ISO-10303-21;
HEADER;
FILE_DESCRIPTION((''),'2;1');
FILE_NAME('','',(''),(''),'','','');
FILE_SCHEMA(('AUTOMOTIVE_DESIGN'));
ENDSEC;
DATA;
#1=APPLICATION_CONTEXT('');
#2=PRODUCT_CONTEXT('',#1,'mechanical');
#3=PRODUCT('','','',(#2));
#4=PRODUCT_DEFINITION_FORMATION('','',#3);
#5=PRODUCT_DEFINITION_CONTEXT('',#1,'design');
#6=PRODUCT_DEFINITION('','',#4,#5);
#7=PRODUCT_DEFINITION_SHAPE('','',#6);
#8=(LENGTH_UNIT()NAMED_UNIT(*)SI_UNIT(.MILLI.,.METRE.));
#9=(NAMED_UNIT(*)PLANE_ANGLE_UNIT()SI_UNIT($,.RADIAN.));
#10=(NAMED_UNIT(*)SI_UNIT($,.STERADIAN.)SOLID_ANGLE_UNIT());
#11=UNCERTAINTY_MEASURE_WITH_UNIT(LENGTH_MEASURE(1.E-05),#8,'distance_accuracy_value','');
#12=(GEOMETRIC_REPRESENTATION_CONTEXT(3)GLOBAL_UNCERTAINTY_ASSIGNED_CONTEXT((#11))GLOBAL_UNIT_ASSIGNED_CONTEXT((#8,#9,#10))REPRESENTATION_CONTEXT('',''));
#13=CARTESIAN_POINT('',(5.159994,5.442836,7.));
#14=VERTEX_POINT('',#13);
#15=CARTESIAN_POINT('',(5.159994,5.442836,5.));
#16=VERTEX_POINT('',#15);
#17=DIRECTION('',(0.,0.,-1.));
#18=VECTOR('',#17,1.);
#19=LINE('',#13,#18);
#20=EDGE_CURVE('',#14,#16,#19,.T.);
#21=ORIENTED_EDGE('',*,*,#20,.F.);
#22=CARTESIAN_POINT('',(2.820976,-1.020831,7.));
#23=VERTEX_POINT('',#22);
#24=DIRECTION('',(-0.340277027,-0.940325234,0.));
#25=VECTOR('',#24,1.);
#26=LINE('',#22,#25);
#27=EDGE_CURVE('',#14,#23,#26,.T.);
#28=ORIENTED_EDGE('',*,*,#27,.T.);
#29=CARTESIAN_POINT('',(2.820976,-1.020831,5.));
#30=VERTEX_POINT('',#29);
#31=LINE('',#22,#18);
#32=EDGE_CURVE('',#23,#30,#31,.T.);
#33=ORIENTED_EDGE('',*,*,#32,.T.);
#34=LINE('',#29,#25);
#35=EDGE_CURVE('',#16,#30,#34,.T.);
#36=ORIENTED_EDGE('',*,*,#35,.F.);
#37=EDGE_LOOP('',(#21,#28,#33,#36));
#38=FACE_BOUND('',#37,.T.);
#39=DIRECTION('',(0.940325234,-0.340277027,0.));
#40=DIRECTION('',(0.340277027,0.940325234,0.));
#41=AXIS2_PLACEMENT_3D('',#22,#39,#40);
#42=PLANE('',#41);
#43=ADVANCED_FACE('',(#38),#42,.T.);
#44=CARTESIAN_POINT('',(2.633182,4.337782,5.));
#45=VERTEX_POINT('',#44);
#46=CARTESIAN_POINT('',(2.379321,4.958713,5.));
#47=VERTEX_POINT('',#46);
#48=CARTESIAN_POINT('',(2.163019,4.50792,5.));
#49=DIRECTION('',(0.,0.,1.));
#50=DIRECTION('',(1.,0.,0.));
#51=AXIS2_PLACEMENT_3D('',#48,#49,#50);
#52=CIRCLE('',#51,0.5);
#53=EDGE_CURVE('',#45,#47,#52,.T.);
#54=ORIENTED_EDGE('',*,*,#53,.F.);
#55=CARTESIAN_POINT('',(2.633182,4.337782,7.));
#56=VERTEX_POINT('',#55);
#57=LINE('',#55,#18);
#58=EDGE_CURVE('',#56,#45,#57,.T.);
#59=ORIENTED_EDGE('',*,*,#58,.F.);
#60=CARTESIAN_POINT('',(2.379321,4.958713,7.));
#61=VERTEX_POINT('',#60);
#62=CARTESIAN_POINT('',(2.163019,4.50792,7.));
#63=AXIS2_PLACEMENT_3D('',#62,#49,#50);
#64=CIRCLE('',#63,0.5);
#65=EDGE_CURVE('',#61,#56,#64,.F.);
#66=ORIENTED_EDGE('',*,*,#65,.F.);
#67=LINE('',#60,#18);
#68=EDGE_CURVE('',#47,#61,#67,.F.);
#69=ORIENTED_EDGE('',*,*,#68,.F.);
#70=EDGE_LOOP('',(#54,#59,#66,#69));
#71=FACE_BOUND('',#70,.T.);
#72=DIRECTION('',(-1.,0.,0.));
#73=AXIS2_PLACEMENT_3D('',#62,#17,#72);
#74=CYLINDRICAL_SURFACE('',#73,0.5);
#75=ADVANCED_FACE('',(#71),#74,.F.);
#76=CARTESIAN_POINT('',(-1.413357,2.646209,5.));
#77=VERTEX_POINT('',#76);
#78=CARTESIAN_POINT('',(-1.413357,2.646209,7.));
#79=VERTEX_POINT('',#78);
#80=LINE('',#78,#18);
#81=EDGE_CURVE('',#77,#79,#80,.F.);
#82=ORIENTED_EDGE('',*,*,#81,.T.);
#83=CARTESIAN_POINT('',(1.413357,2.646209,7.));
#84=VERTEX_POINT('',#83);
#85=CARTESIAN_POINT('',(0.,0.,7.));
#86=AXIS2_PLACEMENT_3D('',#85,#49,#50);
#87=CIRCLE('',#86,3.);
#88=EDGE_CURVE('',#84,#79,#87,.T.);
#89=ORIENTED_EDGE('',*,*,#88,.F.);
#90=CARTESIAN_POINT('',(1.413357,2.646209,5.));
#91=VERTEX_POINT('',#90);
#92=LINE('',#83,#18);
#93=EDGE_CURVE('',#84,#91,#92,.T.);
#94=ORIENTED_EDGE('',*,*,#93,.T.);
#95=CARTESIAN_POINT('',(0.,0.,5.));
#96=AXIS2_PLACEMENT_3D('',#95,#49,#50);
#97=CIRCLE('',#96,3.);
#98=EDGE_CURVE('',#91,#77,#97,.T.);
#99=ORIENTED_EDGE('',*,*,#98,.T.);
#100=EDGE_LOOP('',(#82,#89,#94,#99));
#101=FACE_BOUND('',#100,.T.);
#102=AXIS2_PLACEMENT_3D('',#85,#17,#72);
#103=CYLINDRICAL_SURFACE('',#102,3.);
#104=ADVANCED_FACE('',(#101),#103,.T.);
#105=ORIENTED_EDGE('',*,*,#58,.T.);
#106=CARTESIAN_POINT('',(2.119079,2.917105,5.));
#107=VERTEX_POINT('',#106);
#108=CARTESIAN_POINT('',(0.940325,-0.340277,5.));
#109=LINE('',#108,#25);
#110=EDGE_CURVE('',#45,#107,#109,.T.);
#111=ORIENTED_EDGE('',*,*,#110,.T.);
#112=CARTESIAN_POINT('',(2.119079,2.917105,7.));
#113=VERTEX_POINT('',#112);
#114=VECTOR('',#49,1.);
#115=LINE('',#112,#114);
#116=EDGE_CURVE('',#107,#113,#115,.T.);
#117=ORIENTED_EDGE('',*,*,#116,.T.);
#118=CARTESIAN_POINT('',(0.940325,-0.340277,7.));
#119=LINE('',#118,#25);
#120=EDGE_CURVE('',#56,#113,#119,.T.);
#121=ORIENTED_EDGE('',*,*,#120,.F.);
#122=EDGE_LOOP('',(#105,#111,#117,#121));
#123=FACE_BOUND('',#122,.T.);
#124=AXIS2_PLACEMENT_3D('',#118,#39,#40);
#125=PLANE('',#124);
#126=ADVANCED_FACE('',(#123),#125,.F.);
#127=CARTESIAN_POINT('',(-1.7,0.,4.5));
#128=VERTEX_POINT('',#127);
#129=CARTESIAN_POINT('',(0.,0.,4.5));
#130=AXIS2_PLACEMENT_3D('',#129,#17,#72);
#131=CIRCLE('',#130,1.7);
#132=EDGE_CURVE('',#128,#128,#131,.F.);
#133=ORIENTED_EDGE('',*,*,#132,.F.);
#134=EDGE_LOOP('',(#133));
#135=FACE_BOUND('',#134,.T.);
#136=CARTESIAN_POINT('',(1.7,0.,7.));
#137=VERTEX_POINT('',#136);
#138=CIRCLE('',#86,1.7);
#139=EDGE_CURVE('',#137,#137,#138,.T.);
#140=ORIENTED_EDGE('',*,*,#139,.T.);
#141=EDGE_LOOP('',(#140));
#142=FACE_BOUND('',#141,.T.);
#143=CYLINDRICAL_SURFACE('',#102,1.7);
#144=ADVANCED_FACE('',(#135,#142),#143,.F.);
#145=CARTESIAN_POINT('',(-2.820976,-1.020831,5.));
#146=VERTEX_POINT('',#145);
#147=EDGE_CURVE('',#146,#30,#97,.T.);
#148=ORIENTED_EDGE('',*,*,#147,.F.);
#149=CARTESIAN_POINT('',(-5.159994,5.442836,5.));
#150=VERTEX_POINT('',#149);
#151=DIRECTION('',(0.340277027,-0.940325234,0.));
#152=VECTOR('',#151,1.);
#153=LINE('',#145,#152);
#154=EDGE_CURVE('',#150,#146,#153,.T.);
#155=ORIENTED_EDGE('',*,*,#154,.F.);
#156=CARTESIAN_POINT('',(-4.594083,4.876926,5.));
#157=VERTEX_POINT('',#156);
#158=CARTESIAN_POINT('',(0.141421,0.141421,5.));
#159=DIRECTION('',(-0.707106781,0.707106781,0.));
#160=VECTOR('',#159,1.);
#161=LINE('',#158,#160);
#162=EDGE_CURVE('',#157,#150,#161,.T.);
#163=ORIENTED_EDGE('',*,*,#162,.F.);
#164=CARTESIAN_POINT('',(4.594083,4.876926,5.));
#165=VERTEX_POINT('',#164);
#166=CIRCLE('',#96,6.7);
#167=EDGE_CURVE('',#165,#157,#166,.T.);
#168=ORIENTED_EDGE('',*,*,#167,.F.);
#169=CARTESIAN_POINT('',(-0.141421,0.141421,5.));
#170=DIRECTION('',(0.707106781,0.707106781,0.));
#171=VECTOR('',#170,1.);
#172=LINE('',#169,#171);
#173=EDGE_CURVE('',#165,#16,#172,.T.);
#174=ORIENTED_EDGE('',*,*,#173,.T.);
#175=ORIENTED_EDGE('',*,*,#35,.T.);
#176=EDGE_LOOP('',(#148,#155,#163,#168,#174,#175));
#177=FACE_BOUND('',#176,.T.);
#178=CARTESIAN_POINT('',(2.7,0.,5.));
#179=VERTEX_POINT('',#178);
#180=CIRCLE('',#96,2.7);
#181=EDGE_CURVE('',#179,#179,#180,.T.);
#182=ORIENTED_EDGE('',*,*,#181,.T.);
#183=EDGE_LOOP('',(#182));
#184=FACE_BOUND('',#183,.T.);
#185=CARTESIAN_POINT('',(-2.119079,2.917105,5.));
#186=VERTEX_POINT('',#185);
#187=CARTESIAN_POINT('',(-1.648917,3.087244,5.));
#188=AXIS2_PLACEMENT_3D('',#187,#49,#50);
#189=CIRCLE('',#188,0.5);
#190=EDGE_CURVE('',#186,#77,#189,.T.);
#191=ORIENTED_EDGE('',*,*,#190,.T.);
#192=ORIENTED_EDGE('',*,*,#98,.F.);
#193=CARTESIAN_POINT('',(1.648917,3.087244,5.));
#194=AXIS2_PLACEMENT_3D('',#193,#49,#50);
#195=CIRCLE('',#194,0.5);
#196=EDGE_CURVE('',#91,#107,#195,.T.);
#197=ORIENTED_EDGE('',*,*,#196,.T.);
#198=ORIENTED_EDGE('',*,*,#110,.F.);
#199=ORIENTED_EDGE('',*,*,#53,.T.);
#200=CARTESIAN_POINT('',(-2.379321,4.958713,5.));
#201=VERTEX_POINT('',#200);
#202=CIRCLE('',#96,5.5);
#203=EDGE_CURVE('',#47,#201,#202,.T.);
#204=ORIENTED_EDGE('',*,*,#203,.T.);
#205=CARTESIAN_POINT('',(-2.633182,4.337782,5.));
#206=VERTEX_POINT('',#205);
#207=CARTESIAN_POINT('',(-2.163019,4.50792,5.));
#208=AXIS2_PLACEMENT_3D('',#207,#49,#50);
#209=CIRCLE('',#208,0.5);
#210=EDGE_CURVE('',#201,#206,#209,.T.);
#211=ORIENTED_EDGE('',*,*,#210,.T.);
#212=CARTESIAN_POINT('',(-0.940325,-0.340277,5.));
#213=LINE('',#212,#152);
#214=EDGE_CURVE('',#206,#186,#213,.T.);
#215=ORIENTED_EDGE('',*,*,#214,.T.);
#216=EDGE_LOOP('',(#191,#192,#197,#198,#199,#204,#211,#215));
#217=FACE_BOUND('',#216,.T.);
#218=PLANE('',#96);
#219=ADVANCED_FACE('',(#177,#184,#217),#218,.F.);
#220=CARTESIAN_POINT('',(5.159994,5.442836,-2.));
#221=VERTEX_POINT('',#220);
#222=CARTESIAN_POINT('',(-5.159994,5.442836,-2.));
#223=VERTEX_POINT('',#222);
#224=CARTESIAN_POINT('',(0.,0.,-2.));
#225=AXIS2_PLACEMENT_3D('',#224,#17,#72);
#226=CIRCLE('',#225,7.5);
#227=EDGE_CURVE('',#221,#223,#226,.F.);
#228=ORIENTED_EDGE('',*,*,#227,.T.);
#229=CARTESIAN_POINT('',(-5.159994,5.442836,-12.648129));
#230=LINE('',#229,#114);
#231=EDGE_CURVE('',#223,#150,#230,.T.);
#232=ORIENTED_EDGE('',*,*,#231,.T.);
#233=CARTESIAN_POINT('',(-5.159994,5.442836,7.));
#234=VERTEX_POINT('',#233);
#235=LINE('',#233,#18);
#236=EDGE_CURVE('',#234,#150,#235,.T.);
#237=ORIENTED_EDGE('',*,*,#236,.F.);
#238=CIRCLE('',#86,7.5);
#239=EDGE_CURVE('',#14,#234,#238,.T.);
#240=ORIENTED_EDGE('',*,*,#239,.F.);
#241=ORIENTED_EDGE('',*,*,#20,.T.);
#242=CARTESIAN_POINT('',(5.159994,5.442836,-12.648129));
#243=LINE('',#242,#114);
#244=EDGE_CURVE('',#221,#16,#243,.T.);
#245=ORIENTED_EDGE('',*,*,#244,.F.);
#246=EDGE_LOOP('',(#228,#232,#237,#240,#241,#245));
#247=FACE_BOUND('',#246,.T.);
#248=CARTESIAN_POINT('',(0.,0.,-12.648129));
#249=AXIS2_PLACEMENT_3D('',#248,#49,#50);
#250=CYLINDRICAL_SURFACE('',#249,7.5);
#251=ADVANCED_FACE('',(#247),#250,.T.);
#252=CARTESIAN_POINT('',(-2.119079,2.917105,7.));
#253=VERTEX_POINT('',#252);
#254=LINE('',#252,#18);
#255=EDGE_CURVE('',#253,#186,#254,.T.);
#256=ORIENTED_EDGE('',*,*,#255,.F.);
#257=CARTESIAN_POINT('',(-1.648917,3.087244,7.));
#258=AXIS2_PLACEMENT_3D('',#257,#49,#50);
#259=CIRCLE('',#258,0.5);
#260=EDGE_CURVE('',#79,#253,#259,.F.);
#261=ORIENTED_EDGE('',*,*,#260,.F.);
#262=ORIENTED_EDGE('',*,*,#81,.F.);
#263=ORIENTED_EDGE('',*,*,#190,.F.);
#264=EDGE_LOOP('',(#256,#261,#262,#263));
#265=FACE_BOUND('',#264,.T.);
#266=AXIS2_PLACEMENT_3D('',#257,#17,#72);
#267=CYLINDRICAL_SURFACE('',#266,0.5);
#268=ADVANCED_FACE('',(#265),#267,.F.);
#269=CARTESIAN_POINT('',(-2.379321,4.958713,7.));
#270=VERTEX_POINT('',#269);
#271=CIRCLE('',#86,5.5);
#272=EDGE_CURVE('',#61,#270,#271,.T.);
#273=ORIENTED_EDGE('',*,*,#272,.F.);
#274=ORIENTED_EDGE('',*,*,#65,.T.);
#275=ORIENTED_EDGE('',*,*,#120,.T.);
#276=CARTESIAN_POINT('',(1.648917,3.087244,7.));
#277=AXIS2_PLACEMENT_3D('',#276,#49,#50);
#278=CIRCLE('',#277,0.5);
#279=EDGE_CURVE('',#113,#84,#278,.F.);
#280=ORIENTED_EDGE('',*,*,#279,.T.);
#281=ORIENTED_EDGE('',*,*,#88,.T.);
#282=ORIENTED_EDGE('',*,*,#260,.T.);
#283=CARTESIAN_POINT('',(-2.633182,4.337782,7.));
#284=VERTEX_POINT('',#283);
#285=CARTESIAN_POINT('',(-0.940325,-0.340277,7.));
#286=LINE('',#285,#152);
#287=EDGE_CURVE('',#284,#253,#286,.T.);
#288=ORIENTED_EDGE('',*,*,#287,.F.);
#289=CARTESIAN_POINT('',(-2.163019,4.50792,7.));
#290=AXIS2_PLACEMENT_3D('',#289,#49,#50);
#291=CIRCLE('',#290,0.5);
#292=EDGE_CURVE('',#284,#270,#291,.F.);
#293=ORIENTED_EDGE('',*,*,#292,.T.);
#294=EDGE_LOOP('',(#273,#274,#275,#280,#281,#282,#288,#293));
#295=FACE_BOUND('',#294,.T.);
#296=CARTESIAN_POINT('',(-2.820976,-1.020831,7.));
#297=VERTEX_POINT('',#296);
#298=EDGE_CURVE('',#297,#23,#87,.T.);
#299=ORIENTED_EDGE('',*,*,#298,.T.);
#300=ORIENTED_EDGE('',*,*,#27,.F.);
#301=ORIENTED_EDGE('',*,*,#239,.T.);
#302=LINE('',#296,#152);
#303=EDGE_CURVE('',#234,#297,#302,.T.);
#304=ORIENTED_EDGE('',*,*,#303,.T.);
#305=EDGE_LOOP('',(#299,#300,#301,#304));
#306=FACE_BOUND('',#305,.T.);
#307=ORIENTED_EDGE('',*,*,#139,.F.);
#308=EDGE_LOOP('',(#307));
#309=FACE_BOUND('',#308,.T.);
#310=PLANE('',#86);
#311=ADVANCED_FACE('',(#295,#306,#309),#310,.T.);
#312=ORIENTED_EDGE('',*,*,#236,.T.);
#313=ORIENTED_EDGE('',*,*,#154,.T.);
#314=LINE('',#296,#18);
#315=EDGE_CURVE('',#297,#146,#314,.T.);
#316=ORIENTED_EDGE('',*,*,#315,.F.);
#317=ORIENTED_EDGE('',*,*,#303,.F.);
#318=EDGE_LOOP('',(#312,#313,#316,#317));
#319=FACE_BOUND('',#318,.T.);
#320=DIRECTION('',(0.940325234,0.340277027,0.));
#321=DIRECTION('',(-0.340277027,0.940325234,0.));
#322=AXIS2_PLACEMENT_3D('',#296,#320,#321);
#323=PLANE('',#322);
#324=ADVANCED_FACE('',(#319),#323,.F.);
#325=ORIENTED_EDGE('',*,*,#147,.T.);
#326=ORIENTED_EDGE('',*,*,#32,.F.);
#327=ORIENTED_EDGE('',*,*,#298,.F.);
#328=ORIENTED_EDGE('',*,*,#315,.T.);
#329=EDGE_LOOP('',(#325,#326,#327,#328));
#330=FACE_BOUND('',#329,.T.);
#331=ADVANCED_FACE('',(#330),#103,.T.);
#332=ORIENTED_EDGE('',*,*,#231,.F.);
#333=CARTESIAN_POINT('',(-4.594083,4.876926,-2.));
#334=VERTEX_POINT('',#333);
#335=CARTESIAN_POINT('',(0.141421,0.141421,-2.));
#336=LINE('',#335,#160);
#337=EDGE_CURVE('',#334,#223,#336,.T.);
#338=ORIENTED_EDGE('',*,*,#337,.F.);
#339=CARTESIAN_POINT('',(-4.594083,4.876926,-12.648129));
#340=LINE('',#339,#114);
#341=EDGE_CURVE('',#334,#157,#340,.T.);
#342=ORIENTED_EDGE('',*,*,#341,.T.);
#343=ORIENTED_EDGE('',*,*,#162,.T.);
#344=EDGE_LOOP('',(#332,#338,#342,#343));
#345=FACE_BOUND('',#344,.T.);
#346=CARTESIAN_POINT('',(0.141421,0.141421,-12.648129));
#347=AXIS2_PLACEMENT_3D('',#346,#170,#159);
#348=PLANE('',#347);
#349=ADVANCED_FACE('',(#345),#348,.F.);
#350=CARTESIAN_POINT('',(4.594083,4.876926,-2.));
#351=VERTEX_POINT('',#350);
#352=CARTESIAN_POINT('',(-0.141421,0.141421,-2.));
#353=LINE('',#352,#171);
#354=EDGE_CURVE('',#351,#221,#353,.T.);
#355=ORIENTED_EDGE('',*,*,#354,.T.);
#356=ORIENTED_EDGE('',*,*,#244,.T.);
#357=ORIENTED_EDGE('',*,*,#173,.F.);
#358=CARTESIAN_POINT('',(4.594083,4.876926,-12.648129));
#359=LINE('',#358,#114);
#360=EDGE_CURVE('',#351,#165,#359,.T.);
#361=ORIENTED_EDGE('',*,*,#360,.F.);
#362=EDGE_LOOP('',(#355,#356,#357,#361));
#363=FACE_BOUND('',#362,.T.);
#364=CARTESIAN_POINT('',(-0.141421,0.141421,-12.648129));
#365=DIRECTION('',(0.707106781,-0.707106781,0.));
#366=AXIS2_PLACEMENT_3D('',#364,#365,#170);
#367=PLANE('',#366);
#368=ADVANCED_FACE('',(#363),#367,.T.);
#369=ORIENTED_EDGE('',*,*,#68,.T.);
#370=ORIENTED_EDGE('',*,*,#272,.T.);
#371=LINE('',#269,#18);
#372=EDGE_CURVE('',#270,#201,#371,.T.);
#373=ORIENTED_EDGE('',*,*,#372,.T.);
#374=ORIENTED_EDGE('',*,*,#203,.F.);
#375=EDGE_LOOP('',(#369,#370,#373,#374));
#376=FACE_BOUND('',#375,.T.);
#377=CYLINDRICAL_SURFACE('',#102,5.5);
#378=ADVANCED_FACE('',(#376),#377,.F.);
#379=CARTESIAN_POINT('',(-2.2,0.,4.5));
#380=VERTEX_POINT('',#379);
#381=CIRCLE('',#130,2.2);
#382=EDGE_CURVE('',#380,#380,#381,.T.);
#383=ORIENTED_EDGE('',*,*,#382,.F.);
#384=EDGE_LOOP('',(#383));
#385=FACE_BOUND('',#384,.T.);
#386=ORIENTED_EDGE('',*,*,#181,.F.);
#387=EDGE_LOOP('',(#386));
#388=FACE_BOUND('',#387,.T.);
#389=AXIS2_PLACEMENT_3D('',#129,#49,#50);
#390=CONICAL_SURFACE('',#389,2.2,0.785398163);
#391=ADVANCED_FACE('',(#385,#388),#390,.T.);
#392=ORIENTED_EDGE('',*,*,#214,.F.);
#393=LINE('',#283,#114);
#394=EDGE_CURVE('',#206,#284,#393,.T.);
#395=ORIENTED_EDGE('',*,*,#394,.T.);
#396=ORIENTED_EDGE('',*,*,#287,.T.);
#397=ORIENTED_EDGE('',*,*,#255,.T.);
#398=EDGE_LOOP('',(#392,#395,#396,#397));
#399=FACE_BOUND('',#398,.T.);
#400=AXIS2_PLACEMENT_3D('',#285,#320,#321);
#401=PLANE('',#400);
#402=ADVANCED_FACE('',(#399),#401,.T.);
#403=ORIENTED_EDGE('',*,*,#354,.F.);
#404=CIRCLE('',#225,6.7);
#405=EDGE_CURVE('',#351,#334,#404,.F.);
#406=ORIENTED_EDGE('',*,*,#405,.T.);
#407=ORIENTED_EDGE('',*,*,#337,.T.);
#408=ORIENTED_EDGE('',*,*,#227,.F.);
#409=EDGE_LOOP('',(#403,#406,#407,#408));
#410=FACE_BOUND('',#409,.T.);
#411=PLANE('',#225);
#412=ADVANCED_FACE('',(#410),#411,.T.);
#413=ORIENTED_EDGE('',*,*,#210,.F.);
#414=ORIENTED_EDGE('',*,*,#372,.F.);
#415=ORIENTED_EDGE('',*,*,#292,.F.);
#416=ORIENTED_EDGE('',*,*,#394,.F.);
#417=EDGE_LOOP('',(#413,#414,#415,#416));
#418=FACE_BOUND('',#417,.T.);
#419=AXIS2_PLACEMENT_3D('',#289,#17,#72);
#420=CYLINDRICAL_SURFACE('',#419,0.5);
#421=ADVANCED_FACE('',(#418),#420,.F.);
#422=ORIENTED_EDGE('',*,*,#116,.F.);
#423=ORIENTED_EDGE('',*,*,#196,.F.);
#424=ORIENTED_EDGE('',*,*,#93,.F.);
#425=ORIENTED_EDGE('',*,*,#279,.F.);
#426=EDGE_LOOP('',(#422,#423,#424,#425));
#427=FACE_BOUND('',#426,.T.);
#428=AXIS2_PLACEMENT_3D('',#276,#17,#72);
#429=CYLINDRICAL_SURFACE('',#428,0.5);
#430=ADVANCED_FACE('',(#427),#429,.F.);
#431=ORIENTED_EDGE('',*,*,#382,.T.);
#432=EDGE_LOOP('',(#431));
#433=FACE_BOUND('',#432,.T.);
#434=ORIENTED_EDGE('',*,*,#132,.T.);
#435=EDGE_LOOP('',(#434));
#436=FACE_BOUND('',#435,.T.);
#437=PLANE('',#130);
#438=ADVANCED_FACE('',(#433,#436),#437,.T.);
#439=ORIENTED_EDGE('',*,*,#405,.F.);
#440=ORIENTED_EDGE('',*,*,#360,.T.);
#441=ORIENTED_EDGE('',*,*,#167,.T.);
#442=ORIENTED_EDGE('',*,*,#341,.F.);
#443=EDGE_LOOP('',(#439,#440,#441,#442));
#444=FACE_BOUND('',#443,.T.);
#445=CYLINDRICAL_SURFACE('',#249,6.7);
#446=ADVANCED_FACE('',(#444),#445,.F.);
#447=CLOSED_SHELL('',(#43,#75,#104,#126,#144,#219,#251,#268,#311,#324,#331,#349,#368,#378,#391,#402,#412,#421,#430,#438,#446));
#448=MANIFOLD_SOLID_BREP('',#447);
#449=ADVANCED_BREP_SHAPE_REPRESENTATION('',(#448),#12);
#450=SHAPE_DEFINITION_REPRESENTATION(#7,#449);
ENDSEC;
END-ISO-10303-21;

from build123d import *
from build123d.topology import SkipClean

# Parameters (mm, degrees)
BOSS_EXTRUDE1_DEPTH = 2
BOSS_EXTRUDE2_START = 5
BOSS_EXTRUDE2_DEPTH = 5
BOSS_EXTRUDE3_START = 2
SKETCH3_R           = 3
SKETCH3_R_2         = 1.7
BOSS_EXTRUDE3_DEPTH = 2
SKETCH4_R           = 2.2
SKETCH4_R_2         = 1.7
BOSS_EXTRUDE4_DEPTH = 0.5
CHAMFER1_SIZE       = 0.5
FILLET1_R           = 0.5


with BuildPart() as part:
    # Sketch1 → Boss-Extrude1 (new body)
    with BuildSketch(Plane.XY):
        with BuildLine():
            Line((4.594082841, 4.876925553), (5.159993549, 5.442836262))
            ThreePointArc((5.159993549, 5.442836262), (0, 7.5), (-5.159993549, 5.442836262))
            Line((-5.159993549, 5.442836262), (-4.594082841, 4.876925553))
            ThreePointArc((-4.594082841, 4.876925553), (0, 6.7), (4.594082841, 4.876925553))
        make_face()
    extrude(amount=-BOSS_EXTRUDE1_DEPTH)

    # Sketch1<3> → Boss-Extrude2 (add)
    with BuildSketch(Plane.XY.offset(BOSS_EXTRUDE2_START)):
        with BuildLine():
            Line((4.594082841, 4.876925553), (5.159993549, 5.442836262))
            ThreePointArc((5.159993549, 5.442836262), (0, 7.5), (-5.159993549, 5.442836262))
            Line((-5.159993549, 5.442836262), (-4.594082841, 4.876925553))
            ThreePointArc((-4.594082841, 4.876925553), (0, 6.7), (4.594082841, 4.876925553))
        make_face()
    extrude(amount=-BOSS_EXTRUDE2_DEPTH)

    # Sketch3 → Boss-Extrude3 (add)
    # profile 1 of 3: a face of its own
    with BuildSketch(Plane.XY.offset(5).offset(BOSS_EXTRUDE3_START)):
        with BuildLine():
            Line((-4.594082841, 4.876925553), (-5.159993549, 5.442836262))
            Line((-5.159993549, 5.442836262), (-2.820975701, -1.02083108))
            ThreePointArc((-2.820975701, -1.02083108), (-2.892694114, 0.795185994), (-1.902774006, 2.31936437))
            Line((-1.902774006, 2.31936437), (-2.780654635, 4.745309242))
            ThreePointArc((-2.780654635, 4.745309242), (0, 5.5), (2.780654635, 4.745309242))
            Line((2.780654635, 4.745309242), (1.902774006, 2.31936437))
            ThreePointArc((1.902774006, 2.31936437), (2.711855639, 1.282902565), (3, 0))
            ThreePointArc((3, 0), (2.954904999, -0.518205025), (2.820975701, -1.02083108))
            Line((2.820975701, -1.02083108), (5.159993549, 5.442836262))
            Line((5.159993549, 5.442836262), (4.594082841, 4.876925553))
            ThreePointArc((4.594082841, 4.876925553), (0, 6.7), (-4.594082841, 4.876925553))
        make_face()
    # profile 2 of 3: a face of its own
    with BuildSketch(Plane.XY.offset(5).offset(BOSS_EXTRUDE3_START)):
        with BuildLine():
            Line((-5.159993549, 5.442836262), (-4.594082841, 4.876925553))
            ThreePointArc((-4.594082841, 4.876925553), (0, 6.7), (4.594082841, 4.876925553))
            Line((4.594082841, 4.876925553), (5.159993549, 5.442836262))
            ThreePointArc((5.159993549, 5.442836262), (0, 7.5), (-5.159993549, 5.442836262))
        make_face()
    # profile 3 of 3: a face of its own
    with BuildSketch(Plane.XY.offset(5).offset(BOSS_EXTRUDE3_START)):
        Circle(SKETCH3_R)
        Circle(SKETCH3_R_2, mode=Mode.SUBTRACT)
    extrude(amount=-BOSS_EXTRUDE3_DEPTH)

    # Sketch4 → Boss-Extrude4 (add)
    with SkipClean():  # the faces are left unmerged after this step: merging them gives an invalid solid
        with BuildSketch(Plane(origin=(0, 0, 5), x_dir=(-1, 0, 0), z_dir=(0, 0, -1))):
            with Locations(Location((0, 0, 0), (0, 0, 180))):
                Circle(SKETCH4_R)
            Circle(SKETCH4_R_2, mode=Mode.SUBTRACT)
        extrude(amount=BOSS_EXTRUDE4_DEPTH)
    add(part.part.scale(1), mode=Mode.REPLACE)  # the faces are merged on a copy

    # Chamfer1
    chamfer1_edges = [part.edges().sort_by_distance(p)[0] for p in [
        (-2.2, 0, 5),
    ]]
    chamfer(chamfer1_edges, length=CHAMFER1_SIZE - 0.0001)  # a hair under: the kernel refuses the full size

    # Fillet1
    fillet1_edges = [part.edges().sort_by_distance(p)[0] for p in [
        (2.780654635, 4.745309242, 6),
        (1.902774006, 2.31936437, 6),
        (-1.902774006, 2.31936437, 6),
        (-2.780654635, 4.745309242, 6),
    ]]
    fillet(fillet1_edges, radius=FILLET1_R)


solid = part.part
